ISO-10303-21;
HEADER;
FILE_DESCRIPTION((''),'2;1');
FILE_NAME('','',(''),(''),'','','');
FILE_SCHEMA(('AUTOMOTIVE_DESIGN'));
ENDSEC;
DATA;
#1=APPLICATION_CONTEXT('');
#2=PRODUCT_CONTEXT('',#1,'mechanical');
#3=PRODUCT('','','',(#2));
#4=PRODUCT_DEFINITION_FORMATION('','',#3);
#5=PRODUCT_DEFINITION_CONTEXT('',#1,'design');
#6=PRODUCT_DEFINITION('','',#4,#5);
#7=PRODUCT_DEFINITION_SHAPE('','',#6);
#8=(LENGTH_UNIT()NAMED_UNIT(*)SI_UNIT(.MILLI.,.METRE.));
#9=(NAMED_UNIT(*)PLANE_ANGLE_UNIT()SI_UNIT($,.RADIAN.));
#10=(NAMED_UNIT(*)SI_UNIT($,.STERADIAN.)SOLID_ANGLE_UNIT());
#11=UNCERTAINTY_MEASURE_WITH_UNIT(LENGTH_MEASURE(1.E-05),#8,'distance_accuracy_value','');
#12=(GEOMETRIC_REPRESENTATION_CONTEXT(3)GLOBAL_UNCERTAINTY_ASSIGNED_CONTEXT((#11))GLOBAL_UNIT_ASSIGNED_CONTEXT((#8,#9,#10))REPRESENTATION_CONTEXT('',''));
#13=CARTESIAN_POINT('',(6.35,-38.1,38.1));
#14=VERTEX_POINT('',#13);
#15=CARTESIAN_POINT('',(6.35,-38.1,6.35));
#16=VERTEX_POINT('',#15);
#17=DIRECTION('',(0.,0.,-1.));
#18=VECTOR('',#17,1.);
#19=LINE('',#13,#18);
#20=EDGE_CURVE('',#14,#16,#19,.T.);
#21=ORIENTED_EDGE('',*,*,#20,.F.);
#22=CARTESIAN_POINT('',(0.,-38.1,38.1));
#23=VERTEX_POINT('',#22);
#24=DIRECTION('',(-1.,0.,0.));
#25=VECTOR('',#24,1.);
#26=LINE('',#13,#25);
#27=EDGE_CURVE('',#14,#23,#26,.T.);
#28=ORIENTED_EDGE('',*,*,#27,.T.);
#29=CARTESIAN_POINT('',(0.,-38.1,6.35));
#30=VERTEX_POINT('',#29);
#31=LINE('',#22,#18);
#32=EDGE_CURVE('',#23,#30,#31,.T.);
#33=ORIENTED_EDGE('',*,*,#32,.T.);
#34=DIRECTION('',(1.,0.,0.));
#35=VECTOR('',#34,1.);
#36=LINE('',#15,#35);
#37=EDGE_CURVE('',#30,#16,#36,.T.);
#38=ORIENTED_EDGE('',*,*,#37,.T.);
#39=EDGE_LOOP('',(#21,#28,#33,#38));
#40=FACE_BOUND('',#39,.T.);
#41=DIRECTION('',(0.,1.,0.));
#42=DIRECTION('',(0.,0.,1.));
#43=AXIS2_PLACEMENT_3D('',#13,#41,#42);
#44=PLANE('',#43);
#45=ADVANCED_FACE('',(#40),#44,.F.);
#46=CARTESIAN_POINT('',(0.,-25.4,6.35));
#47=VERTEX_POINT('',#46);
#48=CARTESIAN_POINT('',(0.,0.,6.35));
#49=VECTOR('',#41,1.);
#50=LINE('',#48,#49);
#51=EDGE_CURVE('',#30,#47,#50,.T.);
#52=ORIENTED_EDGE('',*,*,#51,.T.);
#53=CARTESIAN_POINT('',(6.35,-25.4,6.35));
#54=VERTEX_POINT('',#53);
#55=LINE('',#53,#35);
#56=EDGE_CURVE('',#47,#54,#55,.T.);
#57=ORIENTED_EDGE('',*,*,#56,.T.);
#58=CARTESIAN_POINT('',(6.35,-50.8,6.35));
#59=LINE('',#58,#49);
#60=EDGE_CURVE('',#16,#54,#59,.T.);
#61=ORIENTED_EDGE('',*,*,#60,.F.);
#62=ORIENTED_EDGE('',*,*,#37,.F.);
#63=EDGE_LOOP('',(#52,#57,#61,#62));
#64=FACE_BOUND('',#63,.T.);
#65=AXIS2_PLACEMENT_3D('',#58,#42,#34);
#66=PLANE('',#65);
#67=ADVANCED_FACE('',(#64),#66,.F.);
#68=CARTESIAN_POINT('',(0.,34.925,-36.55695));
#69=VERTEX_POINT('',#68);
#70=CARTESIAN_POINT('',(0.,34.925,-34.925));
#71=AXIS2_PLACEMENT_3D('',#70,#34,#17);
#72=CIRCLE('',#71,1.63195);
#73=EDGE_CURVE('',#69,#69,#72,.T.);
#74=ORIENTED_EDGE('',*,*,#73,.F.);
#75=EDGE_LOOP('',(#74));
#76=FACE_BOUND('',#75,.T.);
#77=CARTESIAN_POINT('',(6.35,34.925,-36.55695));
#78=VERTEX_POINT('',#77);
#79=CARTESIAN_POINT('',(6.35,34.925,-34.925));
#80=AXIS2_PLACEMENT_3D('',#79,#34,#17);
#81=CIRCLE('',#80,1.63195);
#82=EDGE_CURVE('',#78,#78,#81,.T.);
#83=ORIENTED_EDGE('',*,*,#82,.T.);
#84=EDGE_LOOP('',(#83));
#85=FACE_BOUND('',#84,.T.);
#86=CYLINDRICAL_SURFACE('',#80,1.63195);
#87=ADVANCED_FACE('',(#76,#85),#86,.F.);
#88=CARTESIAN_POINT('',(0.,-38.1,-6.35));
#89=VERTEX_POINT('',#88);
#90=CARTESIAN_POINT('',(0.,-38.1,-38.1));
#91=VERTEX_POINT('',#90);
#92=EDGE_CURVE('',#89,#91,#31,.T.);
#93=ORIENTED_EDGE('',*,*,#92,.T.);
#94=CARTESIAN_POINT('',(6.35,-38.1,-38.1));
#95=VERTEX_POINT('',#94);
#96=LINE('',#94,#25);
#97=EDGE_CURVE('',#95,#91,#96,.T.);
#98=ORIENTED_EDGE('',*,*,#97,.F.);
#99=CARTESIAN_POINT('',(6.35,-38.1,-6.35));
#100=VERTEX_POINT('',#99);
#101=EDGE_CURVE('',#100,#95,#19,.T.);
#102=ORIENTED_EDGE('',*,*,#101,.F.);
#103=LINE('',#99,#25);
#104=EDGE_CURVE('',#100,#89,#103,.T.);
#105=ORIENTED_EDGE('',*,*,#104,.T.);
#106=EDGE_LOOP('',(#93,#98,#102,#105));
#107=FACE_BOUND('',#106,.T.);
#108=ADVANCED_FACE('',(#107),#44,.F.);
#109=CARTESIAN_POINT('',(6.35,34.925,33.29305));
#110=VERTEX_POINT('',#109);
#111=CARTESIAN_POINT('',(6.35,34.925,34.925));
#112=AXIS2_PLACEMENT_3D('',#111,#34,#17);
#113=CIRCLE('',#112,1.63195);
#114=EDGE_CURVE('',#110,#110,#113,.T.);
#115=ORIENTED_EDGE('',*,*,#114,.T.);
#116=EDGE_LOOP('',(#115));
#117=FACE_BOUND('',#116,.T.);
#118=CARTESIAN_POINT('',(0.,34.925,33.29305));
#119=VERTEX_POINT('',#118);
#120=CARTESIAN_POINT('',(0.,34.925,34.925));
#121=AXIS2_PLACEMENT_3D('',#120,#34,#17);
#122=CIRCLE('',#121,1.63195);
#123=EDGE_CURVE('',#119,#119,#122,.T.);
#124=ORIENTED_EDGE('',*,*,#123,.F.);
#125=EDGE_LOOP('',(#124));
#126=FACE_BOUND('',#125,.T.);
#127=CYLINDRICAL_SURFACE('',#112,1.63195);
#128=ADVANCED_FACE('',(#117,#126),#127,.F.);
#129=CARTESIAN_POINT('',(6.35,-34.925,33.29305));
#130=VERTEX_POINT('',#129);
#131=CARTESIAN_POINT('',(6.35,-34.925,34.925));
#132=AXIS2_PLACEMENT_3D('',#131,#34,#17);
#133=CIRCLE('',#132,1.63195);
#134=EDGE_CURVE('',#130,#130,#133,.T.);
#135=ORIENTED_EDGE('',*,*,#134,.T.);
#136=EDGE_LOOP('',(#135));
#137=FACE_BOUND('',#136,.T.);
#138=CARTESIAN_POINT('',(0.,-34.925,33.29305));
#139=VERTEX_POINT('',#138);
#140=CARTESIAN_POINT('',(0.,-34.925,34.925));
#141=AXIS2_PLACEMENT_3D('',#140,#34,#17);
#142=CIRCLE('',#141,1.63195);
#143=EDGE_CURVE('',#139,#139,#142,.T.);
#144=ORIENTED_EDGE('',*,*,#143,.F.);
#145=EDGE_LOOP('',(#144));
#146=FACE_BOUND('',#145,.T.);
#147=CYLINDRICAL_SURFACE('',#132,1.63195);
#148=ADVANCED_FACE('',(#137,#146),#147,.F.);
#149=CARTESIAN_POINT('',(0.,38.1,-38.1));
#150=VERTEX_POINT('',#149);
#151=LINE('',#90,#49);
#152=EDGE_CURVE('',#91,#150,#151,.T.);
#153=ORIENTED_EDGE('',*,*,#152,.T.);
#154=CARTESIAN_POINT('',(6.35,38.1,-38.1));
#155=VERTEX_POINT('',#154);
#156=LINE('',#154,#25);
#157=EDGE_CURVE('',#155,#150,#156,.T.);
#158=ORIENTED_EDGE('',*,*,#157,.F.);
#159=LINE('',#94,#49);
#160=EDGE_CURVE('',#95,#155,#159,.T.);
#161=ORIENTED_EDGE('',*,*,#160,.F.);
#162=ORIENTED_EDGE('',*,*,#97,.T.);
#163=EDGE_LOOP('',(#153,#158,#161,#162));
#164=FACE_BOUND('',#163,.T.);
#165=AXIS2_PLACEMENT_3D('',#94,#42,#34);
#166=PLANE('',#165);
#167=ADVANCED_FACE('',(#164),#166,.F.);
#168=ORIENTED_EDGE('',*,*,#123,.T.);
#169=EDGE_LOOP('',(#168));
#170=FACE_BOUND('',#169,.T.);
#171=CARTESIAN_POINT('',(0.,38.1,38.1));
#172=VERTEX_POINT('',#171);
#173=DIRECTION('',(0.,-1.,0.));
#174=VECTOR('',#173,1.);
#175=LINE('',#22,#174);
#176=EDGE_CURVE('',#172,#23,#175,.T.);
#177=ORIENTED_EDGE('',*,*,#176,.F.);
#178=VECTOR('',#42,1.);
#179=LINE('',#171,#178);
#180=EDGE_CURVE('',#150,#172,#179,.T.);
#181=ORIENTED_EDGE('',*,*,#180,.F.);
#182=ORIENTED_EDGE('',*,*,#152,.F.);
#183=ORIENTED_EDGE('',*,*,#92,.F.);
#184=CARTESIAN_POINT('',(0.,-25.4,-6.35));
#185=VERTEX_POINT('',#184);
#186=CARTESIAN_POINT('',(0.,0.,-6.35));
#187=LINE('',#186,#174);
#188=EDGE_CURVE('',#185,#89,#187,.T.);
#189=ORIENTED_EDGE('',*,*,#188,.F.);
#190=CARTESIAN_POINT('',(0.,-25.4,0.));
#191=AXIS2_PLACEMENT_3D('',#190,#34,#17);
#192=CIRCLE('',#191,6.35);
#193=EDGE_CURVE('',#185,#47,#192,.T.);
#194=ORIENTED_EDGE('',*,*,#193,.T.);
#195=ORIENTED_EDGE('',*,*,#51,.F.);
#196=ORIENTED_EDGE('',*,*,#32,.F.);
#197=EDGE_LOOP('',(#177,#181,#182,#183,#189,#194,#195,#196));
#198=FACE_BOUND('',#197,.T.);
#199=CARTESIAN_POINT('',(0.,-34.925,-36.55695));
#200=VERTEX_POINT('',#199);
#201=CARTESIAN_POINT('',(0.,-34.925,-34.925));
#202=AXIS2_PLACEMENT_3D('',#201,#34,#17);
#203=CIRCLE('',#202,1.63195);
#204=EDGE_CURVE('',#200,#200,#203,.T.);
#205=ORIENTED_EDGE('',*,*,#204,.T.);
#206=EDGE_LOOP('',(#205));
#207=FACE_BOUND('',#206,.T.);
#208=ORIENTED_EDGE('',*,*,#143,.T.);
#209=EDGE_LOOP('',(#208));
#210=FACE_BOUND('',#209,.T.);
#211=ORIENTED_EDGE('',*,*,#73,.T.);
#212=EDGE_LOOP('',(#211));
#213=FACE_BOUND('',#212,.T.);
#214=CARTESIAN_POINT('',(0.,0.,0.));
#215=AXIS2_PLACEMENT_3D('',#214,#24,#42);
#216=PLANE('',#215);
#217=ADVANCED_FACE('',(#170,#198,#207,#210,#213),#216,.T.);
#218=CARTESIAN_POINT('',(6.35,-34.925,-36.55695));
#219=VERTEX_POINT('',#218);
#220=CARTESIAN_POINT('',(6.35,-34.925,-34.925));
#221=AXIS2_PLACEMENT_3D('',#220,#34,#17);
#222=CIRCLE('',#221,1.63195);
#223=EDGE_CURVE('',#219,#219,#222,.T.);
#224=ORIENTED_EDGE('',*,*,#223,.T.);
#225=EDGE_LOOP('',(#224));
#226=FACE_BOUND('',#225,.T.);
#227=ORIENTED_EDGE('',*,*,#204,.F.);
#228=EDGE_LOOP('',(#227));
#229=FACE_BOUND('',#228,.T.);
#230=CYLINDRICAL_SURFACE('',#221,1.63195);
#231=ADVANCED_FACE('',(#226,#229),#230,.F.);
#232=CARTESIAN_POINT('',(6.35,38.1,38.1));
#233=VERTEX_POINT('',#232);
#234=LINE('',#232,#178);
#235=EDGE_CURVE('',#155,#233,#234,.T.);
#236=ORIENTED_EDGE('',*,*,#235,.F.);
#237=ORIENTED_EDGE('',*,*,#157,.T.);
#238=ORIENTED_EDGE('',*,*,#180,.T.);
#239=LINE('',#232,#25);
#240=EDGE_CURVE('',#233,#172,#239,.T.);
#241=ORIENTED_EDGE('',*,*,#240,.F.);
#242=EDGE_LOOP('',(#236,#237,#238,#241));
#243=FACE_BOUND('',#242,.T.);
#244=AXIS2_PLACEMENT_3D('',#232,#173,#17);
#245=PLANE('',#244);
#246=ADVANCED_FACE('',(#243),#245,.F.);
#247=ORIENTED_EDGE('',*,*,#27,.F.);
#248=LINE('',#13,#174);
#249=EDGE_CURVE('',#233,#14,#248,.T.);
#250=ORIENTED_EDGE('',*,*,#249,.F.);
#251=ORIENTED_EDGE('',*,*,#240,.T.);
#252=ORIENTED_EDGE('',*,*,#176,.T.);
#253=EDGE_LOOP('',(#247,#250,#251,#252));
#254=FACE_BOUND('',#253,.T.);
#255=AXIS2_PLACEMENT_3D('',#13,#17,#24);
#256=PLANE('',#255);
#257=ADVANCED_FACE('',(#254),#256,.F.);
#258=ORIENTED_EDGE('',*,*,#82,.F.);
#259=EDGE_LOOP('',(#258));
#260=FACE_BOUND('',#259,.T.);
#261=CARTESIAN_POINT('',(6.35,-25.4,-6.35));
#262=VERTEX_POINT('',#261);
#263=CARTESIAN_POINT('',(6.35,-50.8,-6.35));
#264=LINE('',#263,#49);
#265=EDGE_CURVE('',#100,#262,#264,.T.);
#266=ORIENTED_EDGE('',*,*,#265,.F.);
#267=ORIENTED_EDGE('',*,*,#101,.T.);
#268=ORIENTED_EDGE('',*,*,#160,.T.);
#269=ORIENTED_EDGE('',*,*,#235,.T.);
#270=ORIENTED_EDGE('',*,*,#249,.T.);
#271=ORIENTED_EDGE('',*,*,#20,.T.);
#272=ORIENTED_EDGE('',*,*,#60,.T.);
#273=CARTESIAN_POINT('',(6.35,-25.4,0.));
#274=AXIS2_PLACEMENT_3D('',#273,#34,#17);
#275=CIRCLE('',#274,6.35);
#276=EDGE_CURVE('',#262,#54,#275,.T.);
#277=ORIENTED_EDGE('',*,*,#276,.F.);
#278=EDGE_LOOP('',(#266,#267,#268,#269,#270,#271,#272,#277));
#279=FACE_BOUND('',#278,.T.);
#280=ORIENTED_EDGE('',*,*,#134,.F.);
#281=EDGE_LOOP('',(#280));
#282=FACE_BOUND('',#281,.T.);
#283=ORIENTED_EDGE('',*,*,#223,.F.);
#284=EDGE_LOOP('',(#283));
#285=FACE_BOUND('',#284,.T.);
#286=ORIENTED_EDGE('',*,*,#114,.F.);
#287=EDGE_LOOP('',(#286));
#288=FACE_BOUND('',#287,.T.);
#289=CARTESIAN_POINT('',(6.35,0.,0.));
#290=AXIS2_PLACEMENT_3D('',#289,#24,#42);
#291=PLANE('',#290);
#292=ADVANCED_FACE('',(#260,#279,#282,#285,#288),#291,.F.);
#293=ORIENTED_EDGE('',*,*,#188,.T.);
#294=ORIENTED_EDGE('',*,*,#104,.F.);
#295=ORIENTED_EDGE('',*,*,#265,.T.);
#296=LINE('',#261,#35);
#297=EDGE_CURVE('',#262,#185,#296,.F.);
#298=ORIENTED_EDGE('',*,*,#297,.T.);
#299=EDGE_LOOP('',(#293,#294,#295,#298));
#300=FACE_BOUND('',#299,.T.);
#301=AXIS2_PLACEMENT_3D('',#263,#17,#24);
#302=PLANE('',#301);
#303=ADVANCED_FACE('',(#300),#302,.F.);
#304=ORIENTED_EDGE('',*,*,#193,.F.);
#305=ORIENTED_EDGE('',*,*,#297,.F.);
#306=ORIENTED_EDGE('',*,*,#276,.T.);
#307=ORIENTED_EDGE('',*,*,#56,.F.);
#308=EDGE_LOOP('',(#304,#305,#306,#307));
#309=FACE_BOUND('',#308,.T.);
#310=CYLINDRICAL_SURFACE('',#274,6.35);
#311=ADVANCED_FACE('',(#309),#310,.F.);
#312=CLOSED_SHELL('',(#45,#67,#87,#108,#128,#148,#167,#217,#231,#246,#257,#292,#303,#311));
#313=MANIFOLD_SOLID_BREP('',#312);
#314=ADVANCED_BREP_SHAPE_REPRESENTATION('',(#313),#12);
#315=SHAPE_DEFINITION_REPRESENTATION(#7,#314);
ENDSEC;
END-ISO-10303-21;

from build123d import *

# Parameters (mm, degrees)
SKETCH1_W                      = 76.2
SKETCH1_H                      = 76.2
BOSS_EXTRUDE1_DEPTH            = 6.35
F_4_CLEARANCE_HOLE1_D          = 3.2639
MIRROR2_COPY_1_D               = 3.2639
F_1_2_0_5_DIAMETER_SLOT1_DEPTH = 6.35


# Read off the part's stored shape, not the designer's step: 1/2 (0.5) Diameter Slot1
with BuildPart() as part:
    # Sketch1 → Boss-Extrude1 (new body)
    with BuildSketch(Plane(origin=(0, 0, 0), x_dir=(0, 0, -1), z_dir=(1, 0, 0))):
        Rectangle(SKETCH1_W, SKETCH1_H)
    extrude(amount=BOSS_EXTRUDE1_DEPTH)

    # #4 Clearance Hole1 (through all)
    with Locations(Plane(origin=(6.35, 0, 0), x_dir=(0, 0, -1), z_dir=(1, 0, 0))):
        with Locations((-34.925, 34.925)):
            f_4_clearance_hole1 = Hole(F_4_CLEARANCE_HOLE1_D / 2)

    # Mirror1: #4 Clearance Hole1 across plane
    add(f_4_clearance_hole1.mirror(Plane.XY), mode=Mode.SUBTRACT)

    # Mirror2: #4 Clearance Hole1 across plane
    add(f_4_clearance_hole1.mirror(Plane.ZX), mode=Mode.SUBTRACT)

    # Mirror2 copy 1 (through all)
    with Locations(Plane(origin=(6.35, 0, 0), x_dir=(0, 0, 1), z_dir=(1, 0, 0))):
        with Locations((-34.925, 34.925)):
            Hole(MIRROR2_COPY_1_D / 2)

    # 1/2 (0.5) Diameter Slot1 outline → 1/2 (0.5) Diameter Slot1 (cut)
    with BuildSketch(Plane.YZ):
        with BuildLine():
            ThreePointArc((-25.4, -6.35), (-19.05, 0), (-25.4, 6.35))
            Line((-25.4, 6.35), (-38.1, 6.35))
            Line((-38.1, 6.35), (-38.1, -6.35))
            Line((-38.1, -6.35), (-25.4, -6.35))
        make_face()
    extrude(amount=F_1_2_0_5_DIAMETER_SLOT1_DEPTH, mode=Mode.SUBTRACT)


solid = part.part
